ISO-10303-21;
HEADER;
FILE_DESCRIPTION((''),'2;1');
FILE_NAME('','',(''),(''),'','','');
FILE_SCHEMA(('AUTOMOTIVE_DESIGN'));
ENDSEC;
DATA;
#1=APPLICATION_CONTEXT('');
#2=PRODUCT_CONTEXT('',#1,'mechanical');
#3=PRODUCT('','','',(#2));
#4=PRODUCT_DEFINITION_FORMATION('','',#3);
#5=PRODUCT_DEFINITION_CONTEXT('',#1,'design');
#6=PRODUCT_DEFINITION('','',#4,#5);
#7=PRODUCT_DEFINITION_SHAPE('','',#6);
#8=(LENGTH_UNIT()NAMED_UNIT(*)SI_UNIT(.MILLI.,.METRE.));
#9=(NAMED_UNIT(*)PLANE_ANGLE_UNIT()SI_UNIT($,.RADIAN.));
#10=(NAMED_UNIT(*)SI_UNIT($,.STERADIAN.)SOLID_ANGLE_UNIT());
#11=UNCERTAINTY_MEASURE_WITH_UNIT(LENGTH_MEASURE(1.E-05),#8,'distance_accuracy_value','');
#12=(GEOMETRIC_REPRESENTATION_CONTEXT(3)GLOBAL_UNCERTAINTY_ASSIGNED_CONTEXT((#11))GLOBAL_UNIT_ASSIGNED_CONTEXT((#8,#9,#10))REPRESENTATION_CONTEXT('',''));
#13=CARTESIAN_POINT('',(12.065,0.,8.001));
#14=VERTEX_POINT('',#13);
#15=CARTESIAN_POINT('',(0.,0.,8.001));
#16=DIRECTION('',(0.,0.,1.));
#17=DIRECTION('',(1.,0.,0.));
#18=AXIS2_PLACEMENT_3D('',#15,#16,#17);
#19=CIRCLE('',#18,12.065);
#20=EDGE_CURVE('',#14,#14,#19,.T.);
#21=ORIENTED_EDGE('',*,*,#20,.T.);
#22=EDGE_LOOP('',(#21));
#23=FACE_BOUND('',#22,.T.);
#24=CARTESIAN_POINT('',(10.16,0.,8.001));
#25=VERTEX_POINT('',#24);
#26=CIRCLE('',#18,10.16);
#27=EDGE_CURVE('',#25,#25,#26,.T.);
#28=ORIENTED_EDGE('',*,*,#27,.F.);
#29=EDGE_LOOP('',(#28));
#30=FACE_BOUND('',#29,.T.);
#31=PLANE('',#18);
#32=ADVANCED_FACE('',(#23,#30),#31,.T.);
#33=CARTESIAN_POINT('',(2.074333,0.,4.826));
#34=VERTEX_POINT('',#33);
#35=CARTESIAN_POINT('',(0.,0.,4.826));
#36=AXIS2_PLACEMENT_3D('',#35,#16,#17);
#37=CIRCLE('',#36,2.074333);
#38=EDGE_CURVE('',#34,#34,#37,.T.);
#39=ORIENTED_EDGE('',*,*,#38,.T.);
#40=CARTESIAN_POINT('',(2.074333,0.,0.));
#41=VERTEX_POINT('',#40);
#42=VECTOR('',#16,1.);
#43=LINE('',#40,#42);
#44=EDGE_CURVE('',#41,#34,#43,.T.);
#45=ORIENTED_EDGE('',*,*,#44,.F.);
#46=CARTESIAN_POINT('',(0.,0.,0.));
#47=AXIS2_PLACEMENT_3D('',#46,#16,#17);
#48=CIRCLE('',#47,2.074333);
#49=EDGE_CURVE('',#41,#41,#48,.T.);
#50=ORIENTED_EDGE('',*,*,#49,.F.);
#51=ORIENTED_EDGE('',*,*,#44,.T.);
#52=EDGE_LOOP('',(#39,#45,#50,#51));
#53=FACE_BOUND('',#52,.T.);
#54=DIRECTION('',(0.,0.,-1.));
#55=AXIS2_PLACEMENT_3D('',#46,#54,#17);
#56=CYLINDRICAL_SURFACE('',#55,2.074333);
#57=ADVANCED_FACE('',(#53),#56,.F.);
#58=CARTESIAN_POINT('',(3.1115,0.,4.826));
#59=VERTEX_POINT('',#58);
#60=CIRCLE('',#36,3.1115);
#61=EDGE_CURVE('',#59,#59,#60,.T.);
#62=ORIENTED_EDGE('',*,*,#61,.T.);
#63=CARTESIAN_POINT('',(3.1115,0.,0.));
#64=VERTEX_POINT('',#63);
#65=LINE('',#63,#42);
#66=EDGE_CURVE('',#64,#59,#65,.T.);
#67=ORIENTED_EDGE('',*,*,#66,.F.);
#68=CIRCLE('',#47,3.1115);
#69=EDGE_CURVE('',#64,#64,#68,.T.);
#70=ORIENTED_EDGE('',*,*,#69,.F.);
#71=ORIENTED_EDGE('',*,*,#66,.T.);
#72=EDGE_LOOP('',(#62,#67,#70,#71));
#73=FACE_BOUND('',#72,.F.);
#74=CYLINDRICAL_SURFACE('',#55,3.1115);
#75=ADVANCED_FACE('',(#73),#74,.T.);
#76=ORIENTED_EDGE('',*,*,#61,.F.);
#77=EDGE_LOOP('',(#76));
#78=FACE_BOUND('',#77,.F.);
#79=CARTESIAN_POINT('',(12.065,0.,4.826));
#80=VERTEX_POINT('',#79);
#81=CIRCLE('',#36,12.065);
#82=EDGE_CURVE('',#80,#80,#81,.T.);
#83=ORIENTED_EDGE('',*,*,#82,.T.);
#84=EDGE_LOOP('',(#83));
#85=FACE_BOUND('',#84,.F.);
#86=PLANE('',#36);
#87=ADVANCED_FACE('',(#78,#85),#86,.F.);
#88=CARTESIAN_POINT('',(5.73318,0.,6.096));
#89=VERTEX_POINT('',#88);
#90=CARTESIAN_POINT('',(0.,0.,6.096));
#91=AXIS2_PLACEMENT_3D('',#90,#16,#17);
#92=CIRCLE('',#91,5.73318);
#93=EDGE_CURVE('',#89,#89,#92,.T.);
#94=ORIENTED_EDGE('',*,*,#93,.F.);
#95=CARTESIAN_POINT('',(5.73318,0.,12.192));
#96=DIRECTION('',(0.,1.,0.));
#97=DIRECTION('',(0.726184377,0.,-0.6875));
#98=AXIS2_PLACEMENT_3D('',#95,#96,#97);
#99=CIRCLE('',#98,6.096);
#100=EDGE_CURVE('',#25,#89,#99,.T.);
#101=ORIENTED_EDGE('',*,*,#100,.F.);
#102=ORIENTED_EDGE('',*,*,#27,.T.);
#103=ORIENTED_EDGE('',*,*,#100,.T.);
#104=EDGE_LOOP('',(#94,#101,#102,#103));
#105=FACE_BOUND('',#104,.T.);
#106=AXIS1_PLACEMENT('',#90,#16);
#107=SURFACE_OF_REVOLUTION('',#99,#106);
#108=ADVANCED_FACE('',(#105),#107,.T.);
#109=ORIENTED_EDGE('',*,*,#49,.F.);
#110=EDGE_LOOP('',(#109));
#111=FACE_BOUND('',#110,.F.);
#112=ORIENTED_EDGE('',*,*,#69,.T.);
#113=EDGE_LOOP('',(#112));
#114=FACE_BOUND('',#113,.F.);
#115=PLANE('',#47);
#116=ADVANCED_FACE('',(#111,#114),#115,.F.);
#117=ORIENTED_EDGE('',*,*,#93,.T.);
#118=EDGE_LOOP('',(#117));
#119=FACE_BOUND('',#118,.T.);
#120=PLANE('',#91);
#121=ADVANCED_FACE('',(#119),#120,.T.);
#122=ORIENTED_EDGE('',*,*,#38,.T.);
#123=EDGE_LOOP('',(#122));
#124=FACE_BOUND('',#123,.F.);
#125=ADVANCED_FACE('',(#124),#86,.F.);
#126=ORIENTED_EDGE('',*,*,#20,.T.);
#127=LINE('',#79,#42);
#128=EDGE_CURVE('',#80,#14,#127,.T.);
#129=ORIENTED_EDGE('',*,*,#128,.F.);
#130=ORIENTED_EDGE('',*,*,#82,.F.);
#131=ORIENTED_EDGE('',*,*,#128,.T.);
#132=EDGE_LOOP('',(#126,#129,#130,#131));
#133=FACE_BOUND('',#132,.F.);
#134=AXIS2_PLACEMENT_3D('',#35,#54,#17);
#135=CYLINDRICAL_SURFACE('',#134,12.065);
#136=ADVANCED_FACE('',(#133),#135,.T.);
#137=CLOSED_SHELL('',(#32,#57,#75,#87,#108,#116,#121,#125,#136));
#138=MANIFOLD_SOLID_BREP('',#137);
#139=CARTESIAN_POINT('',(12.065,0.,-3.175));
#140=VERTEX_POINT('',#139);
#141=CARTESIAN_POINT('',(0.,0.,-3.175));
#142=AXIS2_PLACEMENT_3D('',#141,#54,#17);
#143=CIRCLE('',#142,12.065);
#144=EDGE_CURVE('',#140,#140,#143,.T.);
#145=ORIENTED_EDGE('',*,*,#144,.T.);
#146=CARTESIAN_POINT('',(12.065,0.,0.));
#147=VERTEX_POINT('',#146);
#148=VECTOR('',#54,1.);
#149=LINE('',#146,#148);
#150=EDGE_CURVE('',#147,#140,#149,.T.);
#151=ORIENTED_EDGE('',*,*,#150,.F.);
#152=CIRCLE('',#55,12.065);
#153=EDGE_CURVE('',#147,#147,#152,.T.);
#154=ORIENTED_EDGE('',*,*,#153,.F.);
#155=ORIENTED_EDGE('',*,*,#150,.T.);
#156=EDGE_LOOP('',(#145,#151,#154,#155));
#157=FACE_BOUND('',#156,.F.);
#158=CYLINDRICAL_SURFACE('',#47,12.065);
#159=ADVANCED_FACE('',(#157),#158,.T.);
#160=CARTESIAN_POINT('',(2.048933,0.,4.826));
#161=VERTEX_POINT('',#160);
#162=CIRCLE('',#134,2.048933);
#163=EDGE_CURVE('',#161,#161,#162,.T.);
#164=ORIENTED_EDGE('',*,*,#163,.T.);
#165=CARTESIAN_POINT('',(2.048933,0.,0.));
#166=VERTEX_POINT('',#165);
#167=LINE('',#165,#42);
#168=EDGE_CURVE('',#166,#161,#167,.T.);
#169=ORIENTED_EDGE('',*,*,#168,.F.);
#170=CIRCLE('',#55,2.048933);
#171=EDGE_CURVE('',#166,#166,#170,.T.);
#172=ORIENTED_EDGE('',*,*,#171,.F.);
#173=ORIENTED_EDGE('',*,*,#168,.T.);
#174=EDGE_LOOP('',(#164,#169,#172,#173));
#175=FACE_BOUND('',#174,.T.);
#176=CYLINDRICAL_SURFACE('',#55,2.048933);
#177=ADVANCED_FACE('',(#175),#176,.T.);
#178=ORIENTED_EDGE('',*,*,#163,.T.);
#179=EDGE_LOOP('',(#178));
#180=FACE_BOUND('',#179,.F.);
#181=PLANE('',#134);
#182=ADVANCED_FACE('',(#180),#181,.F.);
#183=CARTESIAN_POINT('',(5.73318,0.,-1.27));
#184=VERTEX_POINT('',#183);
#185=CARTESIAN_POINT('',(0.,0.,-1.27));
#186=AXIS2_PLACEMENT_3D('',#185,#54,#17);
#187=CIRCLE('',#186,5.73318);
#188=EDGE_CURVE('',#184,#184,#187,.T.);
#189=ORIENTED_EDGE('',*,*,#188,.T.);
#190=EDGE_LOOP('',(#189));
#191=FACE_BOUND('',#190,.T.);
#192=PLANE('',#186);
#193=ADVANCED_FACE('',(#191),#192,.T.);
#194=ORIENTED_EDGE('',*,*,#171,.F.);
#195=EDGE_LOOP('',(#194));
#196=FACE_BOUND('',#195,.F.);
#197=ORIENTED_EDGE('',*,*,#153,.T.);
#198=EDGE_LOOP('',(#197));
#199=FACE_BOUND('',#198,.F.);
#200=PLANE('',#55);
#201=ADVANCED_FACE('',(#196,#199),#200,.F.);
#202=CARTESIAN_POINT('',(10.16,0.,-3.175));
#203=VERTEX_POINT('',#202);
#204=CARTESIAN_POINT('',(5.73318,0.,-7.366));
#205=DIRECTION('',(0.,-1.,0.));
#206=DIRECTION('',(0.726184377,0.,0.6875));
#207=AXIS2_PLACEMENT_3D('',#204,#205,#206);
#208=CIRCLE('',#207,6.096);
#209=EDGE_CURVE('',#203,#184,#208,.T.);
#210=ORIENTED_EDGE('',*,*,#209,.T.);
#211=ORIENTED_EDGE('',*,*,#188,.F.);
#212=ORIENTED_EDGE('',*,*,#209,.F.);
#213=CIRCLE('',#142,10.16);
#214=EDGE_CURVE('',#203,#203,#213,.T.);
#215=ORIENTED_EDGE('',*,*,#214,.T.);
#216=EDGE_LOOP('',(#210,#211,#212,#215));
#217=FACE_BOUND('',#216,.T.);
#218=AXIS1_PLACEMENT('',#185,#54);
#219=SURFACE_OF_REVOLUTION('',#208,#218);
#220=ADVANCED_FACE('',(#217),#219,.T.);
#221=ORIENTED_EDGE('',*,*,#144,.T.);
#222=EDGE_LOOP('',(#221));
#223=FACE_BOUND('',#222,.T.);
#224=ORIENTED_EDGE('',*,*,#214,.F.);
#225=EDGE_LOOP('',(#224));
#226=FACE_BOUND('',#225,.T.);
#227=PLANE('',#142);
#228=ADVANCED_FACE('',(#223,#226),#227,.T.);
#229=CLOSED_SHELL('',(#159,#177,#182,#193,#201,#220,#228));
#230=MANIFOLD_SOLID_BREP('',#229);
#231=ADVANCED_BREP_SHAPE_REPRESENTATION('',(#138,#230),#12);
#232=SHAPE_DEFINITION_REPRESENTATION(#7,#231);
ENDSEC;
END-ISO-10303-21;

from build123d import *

# Parameters (mm, degrees)
F0_R      = 3.1115
F0_R_2    = 2.0743333333
F1_DEPTH  = 4.826
F2_R      = 12.065
F3_DEPTH  = 3.175
F4_R      = 10.16
F5_DEPTH  = 1.905
F6_R      = 2.0489333333
F7_DEPTH  = 4.826
F8_R      = 12.065
F9_DEPTH  = 3.175
F10_R     = 10.16
F11_DEPTH = 1.905


# Not quite as in the source:
# - a fillet or chamfer that OpenCascade refuses, or shapes differently, is made with other operations: its cross-section is extruded or revolved along the edge and cut away or added


with BuildPart() as f1:
    # F0 (on Top) → F1 (new body)
    with BuildSketch(Plane.XY):
        Circle(F0_R)
        Circle(F0_R_2, mode=Mode.SUBTRACT)
    extrude(amount=F1_DEPTH)

    # F2 (on face) → F3 (join)
    with BuildSketch(Plane.XY.offset(4.826)):
        Circle(F2_R)
    extrude(amount=F3_DEPTH)

    # F4 (on face) → F5 (cut)
    with BuildSketch(Plane.XY.offset(8.001)):
        Circle(F4_R)
    extrude(amount=-F5_DEPTH, mode=Mode.SUBTRACT)

    # F12: fillet of radius 6.096 on 1 edges, made by hand

    # F12_s1 → F12_t2 (revolve)
    with BuildSketch(Plane.XZ):
        with BuildLine():
            ThreePointArc((10.16, 8.001), (8.1428356123, 6.592466448), (5.7331800353, 6.096))
            Line((5.7331800353, 6.096), (10.16, 6.096))
            Line((10.16, 6.096), (10.16, 8.001))
        make_face()
    revolve(axis=Axis((0, 0, 6.096), (0, 0, 1)))


with BuildPart() as f7:
    # F6 (on face) → F7 (new body)
    with BuildSketch(Plane(origin=(0, 0, 0), x_dir=(1, 0, 0), z_dir=(0, 0, -1))):
        Circle(F6_R)
    extrude(amount=-F7_DEPTH)

    # F8 (on face) → F9 (join)
    with BuildSketch(Plane(origin=(0, 0, 0), x_dir=(1, 0, 0), z_dir=(0, 0, -1))):
        Circle(F8_R)
    extrude(amount=F9_DEPTH)

    # F10 (on face) → F11 (cut)
    with BuildSketch(Plane(origin=(0, 0, -3.175), x_dir=(1, 0, 0), z_dir=(0, 0, -1))):
        Circle(F10_R)
    extrude(amount=-F11_DEPTH, mode=Mode.SUBTRACT)

    # F12#2: fillet of radius 6.096 on 1 edges, made by hand

    # F12_2_s1 → F12_2_t2 (revolve)
    with BuildSketch(Plane.XZ):
        with BuildLine():
            ThreePointArc((10.16, -3.175), (8.1428356123, -1.766466448), (5.7331800353, -1.27))
            Line((5.7331800353, -1.27), (10.16, -1.27))
            Line((10.16, -1.27), (10.16, -3.175))
        make_face()
    revolve(axis=Axis((0, 0, -1.27), (0, 0, -1)))


solid = Compound([f1.part, f7.part])
